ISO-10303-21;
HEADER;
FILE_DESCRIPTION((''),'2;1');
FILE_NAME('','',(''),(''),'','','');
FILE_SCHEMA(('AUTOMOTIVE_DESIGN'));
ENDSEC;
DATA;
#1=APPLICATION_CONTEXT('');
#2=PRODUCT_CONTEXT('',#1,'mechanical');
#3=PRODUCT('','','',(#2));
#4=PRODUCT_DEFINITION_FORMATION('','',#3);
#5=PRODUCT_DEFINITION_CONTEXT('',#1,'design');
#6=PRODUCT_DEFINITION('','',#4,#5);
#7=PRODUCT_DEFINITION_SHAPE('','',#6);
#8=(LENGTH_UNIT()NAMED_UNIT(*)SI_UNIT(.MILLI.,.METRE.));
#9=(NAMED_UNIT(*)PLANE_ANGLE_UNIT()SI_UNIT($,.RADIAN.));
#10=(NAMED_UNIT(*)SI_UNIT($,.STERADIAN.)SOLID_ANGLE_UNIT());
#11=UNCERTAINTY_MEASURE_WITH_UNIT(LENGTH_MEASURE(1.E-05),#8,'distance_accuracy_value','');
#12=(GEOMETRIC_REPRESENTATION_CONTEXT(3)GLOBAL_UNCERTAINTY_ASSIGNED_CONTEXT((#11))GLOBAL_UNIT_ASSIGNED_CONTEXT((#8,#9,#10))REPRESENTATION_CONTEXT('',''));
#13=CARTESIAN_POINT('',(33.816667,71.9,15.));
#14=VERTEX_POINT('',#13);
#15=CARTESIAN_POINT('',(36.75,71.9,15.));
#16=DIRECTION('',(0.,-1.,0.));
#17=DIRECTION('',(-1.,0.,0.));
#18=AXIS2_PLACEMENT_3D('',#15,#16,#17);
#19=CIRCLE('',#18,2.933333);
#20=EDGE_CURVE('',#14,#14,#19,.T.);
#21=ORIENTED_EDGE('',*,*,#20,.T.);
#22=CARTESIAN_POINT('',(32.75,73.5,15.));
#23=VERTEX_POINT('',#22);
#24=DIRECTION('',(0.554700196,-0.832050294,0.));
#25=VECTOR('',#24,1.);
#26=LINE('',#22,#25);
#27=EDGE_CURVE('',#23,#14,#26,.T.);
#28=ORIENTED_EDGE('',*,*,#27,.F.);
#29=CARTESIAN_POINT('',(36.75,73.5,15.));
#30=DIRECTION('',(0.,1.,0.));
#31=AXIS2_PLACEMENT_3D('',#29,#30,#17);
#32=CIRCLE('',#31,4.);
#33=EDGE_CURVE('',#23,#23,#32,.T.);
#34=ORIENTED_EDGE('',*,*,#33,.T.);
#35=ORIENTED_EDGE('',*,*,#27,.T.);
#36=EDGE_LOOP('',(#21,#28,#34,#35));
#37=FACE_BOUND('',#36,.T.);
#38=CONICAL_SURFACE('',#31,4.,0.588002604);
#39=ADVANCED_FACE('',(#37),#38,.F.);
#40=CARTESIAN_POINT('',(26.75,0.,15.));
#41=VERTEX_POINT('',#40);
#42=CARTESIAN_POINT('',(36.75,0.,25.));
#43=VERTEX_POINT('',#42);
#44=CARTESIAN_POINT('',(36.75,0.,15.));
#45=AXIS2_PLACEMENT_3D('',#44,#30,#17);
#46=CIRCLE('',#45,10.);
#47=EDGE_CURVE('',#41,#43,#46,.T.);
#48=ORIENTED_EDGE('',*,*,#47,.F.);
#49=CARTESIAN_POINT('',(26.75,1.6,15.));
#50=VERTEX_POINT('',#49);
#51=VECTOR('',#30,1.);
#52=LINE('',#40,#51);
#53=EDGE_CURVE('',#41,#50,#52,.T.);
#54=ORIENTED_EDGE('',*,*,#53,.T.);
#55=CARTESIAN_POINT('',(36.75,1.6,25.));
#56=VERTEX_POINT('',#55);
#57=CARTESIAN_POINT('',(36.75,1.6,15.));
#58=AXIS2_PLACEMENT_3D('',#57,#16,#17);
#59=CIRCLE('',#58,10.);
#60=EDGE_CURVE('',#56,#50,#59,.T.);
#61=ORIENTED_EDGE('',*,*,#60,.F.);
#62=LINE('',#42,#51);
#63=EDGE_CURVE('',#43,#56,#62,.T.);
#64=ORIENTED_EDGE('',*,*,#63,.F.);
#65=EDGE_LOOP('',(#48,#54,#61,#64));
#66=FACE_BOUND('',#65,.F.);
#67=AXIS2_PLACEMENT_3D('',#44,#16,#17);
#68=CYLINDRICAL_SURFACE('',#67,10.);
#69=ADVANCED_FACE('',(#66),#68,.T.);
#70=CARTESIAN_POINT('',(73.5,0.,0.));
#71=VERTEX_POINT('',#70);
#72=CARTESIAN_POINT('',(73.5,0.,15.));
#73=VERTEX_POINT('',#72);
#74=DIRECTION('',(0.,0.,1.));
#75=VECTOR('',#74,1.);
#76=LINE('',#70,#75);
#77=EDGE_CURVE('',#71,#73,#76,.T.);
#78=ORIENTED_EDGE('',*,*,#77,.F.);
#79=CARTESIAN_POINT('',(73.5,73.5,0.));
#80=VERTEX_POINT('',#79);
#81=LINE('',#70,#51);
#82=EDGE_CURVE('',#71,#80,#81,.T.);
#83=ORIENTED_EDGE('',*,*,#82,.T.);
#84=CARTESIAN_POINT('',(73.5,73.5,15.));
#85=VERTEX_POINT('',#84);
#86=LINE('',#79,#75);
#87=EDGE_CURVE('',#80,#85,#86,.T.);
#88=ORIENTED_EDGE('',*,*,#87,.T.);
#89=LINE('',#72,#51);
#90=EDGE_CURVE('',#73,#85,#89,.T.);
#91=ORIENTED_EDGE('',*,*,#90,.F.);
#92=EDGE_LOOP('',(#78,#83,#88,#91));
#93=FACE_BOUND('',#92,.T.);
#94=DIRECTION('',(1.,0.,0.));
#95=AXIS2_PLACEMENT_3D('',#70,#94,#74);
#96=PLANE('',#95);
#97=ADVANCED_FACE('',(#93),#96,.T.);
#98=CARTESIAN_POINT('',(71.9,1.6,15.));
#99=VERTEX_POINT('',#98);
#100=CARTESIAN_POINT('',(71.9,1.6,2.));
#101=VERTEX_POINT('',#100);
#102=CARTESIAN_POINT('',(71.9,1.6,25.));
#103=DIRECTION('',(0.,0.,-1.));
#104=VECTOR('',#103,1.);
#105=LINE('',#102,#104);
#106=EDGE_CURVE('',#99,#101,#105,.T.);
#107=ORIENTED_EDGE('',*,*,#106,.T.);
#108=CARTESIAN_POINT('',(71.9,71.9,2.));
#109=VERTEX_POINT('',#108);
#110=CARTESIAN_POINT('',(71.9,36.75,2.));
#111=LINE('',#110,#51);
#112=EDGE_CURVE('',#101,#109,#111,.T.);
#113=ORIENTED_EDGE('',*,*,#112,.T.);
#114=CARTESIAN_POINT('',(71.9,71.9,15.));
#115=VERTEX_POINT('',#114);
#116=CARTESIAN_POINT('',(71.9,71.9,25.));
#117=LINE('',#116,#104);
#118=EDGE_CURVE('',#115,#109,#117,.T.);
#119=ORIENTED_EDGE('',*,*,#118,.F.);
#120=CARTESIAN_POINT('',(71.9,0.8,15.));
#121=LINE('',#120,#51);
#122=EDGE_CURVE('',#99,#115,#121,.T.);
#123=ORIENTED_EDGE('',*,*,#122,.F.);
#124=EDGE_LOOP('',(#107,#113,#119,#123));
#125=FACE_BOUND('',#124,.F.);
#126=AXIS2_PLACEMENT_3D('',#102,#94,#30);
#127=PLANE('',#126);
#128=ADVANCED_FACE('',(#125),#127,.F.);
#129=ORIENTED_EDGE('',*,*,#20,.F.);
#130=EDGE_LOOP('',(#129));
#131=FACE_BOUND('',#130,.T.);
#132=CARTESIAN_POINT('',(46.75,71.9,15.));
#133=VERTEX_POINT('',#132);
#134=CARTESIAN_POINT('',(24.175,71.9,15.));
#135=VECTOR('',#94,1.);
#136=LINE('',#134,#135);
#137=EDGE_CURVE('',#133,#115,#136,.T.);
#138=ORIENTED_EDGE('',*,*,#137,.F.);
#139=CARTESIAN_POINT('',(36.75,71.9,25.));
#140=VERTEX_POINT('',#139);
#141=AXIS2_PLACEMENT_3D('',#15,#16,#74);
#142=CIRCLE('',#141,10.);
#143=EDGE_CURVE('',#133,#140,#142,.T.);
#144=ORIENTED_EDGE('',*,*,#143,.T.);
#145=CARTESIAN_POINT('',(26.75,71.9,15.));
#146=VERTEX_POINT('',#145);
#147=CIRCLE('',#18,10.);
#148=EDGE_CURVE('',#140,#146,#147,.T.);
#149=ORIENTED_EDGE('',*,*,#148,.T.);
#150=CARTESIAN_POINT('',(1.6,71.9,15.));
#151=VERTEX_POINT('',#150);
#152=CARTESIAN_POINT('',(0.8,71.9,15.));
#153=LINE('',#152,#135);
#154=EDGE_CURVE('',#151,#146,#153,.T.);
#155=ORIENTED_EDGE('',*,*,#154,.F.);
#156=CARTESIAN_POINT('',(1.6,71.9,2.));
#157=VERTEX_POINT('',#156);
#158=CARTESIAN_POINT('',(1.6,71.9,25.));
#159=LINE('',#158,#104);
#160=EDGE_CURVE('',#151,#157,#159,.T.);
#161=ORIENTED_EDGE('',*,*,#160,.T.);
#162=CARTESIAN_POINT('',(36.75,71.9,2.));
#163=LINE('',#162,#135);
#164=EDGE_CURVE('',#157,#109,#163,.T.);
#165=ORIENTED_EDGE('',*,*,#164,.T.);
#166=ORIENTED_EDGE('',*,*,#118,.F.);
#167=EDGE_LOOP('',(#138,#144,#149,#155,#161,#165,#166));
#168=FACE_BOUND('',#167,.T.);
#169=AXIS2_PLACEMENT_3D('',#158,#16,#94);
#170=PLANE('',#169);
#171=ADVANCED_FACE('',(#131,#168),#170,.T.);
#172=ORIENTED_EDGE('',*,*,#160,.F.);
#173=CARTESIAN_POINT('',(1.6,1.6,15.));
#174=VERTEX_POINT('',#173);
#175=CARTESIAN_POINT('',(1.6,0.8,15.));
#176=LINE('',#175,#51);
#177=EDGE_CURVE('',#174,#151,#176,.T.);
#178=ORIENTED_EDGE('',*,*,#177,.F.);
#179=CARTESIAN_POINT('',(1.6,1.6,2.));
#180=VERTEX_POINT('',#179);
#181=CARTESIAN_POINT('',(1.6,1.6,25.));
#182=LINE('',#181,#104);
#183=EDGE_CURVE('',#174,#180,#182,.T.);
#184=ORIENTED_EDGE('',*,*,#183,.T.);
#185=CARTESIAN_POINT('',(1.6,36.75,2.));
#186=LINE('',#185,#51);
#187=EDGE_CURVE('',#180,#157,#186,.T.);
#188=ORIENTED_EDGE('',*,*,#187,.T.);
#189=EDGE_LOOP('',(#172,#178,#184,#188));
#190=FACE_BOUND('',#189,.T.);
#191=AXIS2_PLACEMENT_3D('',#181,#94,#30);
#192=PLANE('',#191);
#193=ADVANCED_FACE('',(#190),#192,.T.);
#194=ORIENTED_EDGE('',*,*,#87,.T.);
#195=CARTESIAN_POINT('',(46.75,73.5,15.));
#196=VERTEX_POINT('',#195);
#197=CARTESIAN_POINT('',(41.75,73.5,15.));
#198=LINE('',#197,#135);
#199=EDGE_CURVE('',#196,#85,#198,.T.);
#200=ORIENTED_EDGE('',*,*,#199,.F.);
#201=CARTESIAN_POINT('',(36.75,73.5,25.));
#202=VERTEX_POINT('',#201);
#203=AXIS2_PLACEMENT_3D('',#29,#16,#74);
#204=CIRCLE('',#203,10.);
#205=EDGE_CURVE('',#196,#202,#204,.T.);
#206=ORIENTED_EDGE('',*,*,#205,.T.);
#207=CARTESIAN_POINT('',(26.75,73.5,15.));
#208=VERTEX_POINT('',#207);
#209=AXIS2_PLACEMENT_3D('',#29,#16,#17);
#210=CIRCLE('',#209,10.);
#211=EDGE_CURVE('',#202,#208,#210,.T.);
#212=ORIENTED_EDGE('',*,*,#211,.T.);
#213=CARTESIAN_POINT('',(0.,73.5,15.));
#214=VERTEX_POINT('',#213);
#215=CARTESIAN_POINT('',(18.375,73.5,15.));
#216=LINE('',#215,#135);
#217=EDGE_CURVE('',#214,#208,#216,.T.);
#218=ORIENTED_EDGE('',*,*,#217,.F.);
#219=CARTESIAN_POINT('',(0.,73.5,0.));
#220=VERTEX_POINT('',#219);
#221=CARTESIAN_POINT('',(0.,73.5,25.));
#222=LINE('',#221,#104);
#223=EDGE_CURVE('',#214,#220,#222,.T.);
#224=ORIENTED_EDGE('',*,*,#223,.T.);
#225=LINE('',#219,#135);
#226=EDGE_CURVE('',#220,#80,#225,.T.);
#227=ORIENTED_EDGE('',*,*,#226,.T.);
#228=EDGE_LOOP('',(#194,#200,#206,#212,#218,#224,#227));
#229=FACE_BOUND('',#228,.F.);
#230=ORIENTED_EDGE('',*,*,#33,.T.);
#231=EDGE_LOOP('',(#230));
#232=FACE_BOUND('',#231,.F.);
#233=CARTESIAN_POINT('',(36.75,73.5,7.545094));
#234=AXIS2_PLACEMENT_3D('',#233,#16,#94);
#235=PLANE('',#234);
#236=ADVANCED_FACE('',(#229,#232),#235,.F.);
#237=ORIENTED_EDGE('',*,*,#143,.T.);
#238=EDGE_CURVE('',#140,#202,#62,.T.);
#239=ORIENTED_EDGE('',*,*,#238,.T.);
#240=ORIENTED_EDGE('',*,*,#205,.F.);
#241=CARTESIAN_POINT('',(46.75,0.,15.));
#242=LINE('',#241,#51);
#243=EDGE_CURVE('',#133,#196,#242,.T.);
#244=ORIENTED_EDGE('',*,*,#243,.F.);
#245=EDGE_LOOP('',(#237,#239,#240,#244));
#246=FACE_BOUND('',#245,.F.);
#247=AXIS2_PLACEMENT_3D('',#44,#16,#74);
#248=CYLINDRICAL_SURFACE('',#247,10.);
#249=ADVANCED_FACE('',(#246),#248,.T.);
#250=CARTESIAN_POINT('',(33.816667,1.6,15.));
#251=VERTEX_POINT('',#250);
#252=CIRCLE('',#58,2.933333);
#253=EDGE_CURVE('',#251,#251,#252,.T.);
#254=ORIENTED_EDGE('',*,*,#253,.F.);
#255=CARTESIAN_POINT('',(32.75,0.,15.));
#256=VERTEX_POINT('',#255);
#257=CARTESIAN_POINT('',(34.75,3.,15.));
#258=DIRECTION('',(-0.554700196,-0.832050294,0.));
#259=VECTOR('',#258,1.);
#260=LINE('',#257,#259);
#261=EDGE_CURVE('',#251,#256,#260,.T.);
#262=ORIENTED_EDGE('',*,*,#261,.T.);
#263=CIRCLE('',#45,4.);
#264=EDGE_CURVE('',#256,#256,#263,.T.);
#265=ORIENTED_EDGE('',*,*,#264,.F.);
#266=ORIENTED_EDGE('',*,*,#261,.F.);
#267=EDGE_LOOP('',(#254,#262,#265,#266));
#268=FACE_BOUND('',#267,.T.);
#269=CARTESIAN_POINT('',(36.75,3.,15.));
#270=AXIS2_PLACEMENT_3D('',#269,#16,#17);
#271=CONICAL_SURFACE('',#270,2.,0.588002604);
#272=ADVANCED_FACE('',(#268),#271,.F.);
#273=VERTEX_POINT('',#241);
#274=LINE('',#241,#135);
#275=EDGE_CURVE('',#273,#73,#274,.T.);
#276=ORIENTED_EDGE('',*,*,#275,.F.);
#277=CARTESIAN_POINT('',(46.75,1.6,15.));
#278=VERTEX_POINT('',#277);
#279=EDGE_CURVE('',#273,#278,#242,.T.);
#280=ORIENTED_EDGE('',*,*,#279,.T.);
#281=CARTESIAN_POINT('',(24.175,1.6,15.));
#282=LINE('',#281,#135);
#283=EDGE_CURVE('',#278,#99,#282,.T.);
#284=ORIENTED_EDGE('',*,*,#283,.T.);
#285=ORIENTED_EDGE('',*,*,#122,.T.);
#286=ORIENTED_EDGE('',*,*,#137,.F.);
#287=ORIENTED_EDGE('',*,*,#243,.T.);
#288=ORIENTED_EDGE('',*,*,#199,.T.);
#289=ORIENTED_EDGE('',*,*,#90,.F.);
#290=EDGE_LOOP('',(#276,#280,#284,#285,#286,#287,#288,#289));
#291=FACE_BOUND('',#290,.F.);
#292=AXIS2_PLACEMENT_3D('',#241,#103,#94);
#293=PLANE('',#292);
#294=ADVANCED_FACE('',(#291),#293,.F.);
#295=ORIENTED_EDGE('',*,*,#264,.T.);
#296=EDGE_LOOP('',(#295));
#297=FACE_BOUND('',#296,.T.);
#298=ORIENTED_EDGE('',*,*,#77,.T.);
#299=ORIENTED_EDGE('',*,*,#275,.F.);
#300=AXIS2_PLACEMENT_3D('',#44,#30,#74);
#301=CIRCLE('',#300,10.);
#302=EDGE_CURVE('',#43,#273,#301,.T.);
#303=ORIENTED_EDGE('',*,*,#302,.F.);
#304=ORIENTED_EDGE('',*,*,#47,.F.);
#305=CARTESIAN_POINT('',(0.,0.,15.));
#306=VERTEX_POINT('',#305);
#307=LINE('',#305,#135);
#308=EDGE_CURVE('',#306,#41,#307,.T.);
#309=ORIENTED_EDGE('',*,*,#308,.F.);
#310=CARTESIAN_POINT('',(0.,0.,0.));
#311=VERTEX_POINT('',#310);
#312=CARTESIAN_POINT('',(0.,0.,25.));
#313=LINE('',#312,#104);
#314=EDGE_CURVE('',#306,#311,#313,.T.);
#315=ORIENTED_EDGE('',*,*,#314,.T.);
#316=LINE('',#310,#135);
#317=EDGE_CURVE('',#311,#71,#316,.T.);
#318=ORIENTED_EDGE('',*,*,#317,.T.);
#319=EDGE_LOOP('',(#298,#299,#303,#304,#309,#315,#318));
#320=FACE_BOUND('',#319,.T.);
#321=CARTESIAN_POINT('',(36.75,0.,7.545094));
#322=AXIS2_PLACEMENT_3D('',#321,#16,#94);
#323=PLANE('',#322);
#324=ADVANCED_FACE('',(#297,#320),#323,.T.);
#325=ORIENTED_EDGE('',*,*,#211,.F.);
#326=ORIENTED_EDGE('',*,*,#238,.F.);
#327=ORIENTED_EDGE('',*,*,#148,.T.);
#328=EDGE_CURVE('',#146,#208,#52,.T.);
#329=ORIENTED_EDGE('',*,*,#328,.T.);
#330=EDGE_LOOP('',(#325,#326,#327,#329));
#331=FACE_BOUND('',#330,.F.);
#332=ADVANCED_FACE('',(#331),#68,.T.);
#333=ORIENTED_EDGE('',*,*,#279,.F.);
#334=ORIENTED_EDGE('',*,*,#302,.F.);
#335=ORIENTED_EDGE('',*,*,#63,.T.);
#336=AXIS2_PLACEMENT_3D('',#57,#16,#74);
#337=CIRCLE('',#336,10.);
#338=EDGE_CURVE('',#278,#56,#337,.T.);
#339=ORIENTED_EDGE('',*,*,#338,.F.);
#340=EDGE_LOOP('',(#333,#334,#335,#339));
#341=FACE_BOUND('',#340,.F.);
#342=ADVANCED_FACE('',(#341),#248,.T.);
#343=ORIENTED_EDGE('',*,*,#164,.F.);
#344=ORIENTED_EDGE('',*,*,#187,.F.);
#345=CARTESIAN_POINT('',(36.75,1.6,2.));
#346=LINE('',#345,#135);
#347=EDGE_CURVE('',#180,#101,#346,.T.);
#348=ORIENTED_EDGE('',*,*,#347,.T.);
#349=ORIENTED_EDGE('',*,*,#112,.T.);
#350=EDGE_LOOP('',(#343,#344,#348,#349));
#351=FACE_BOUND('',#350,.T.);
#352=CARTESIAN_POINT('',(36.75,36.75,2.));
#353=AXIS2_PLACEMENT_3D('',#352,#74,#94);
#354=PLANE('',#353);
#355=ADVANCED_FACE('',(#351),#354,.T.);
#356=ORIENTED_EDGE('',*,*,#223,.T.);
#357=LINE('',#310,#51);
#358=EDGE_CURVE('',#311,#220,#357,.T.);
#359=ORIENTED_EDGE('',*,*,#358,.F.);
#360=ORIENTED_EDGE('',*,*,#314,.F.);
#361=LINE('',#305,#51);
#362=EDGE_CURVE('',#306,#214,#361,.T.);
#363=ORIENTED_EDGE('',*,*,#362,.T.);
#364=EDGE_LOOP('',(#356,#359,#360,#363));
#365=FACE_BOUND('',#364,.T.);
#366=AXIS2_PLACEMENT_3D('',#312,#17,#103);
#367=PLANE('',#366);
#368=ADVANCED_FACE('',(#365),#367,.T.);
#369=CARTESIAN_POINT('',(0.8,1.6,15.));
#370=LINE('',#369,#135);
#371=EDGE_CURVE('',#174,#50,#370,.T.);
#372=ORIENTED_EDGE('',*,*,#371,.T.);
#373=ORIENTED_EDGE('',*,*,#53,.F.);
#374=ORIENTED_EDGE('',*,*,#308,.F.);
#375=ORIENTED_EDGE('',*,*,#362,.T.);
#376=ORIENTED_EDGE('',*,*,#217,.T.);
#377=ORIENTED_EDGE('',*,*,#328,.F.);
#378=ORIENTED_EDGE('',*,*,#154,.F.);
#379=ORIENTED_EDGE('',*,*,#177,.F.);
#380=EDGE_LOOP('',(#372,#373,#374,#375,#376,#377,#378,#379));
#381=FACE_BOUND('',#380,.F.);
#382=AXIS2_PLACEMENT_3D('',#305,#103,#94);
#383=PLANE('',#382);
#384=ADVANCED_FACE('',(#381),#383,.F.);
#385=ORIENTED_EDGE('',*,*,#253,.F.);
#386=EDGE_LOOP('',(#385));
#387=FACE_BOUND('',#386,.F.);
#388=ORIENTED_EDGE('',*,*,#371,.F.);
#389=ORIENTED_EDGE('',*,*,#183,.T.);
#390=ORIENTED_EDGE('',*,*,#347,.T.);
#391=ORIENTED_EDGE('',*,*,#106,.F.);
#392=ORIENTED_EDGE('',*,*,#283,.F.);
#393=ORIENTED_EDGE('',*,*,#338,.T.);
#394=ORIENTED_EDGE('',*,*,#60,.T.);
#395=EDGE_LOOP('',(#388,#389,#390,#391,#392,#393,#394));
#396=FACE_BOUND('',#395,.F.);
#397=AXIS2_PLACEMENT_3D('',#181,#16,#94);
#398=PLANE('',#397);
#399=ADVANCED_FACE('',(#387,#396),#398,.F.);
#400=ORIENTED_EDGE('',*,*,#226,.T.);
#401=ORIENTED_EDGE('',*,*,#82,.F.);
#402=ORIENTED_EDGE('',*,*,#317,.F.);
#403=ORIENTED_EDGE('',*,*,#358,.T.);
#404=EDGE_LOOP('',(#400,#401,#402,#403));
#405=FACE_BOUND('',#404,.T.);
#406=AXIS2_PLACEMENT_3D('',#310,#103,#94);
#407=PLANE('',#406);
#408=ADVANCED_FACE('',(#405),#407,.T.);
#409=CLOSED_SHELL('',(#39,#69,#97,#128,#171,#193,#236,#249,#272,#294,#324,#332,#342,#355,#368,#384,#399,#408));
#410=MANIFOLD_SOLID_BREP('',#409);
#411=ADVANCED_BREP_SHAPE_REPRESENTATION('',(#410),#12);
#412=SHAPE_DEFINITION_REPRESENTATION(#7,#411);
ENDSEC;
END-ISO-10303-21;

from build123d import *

# Parameters (mm, degrees)
F1_DEPTH = 73.5
F2_W     = 70.3
F2_H     = 70.3
F3_DEPTH = 23
F4_DEPTH = 73.501


# Not quite as in the source:
# - a fillet or chamfer that OpenCascade refuses, or shapes differently, is made with other operations: its cross-section is extruded or revolved along the edge and cut away or added


with BuildPart() as f1:
    # F0 (on Front) → F1 (new body)
    with BuildSketch(Plane.XZ):
        with BuildLine():
            Line((0, 15), (0, 0))
            Line((0, 0), (73.5, 0))
            Line((73.5, 0), (73.5, 15))
            Line((73.5, 15), (46.75, 15))
            Line((46.75, 15), (38.75, 15))
            ThreePointArc((38.75, 15), (36.75, 13), (34.75, 15))
            Line((34.75, 15), (26.75, 15))
            Line((26.75, 15), (0, 15))
        make_face()
        with BuildLine():
            Line((0, 25), (0, 15))
            Line((0, 15), (26.75, 15))
            ThreePointArc((26.75, 15), (29.6789321881, 22.0710678119), (36.75, 25))
            Line((36.75, 25), (0, 25))
        make_face()
        with BuildLine():
            Line((46.75, 15), (73.5, 15))
            Line((73.5, 15), (73.5, 25))
            Line((73.5, 25), (36.75, 25))
            ThreePointArc((36.75, 25), (43.8210678119, 22.0710678119), (46.75, 15))
        make_face()
        with BuildLine():
            ThreePointArc((36.75, 25), (29.6789321881, 22.0710678119), (26.75, 15))
            Line((26.75, 15), (34.75, 15))
            ThreePointArc((34.75, 15), (36.75, 17), (38.75, 15))
            Line((38.75, 15), (46.75, 15))
            ThreePointArc((46.75, 15), (43.8210678119, 22.0710678119), (36.75, 25))
        make_face()
    extrude(amount=-F1_DEPTH)

    # F2 (on face) → F3 (cut)
    with BuildSketch(Plane.XY.offset(25)):
        with Locations((36.75, 36.75)):
            Rectangle(F2_W, F2_H)
    extrude(amount=-F3_DEPTH, mode=Mode.SUBTRACT)

    # F0 (on Front) → F4 (cut, through all)
    with BuildSketch(Plane.XZ):
        with BuildLine():
            Line((0, 25), (0, 15))
            Line((0, 15), (26.75, 15))
            ThreePointArc((26.75, 15), (29.6789321881, 22.0710678119), (36.75, 25))
            Line((36.75, 25), (0, 25))
        make_face()
        with BuildLine():
            Line((46.75, 15), (73.5, 15))
            Line((73.5, 15), (73.5, 25))
            Line((73.5, 25), (36.75, 25))
            ThreePointArc((36.75, 25), (43.8210678119, 22.0710678119), (46.75, 15))
        make_face()
    extrude(amount=-F4_DEPTH, mode=Mode.SUBTRACT)

    # F5: chamfer of 3 x 2 on 1 edges, made by hand

    # F5_s1 → F5_t2 (revolve, cut)
    with BuildSketch(Plane.XY.offset(15)):
        Polygon((34.75, 3), (32.75, 0), (34.75, 0), align=None)
    revolve(axis=Axis((36.75, 0, 15), (0, 1, 0)), mode=Mode.SUBTRACT)

    # F6: chamfer of 3 x 2 on 1 edges, made by hand

    # F6_s1 → F6_t2 (revolve, cut)
    with BuildSketch(Plane.XY.offset(15)):
        Polygon((32.75, 73.5), (34.75, 70.5), (34.75, 73.5), align=None)
    revolve(axis=Axis((36.75, 73.5, 15), (0, 1, 0)), mode=Mode.SUBTRACT)


solid = f1.part
